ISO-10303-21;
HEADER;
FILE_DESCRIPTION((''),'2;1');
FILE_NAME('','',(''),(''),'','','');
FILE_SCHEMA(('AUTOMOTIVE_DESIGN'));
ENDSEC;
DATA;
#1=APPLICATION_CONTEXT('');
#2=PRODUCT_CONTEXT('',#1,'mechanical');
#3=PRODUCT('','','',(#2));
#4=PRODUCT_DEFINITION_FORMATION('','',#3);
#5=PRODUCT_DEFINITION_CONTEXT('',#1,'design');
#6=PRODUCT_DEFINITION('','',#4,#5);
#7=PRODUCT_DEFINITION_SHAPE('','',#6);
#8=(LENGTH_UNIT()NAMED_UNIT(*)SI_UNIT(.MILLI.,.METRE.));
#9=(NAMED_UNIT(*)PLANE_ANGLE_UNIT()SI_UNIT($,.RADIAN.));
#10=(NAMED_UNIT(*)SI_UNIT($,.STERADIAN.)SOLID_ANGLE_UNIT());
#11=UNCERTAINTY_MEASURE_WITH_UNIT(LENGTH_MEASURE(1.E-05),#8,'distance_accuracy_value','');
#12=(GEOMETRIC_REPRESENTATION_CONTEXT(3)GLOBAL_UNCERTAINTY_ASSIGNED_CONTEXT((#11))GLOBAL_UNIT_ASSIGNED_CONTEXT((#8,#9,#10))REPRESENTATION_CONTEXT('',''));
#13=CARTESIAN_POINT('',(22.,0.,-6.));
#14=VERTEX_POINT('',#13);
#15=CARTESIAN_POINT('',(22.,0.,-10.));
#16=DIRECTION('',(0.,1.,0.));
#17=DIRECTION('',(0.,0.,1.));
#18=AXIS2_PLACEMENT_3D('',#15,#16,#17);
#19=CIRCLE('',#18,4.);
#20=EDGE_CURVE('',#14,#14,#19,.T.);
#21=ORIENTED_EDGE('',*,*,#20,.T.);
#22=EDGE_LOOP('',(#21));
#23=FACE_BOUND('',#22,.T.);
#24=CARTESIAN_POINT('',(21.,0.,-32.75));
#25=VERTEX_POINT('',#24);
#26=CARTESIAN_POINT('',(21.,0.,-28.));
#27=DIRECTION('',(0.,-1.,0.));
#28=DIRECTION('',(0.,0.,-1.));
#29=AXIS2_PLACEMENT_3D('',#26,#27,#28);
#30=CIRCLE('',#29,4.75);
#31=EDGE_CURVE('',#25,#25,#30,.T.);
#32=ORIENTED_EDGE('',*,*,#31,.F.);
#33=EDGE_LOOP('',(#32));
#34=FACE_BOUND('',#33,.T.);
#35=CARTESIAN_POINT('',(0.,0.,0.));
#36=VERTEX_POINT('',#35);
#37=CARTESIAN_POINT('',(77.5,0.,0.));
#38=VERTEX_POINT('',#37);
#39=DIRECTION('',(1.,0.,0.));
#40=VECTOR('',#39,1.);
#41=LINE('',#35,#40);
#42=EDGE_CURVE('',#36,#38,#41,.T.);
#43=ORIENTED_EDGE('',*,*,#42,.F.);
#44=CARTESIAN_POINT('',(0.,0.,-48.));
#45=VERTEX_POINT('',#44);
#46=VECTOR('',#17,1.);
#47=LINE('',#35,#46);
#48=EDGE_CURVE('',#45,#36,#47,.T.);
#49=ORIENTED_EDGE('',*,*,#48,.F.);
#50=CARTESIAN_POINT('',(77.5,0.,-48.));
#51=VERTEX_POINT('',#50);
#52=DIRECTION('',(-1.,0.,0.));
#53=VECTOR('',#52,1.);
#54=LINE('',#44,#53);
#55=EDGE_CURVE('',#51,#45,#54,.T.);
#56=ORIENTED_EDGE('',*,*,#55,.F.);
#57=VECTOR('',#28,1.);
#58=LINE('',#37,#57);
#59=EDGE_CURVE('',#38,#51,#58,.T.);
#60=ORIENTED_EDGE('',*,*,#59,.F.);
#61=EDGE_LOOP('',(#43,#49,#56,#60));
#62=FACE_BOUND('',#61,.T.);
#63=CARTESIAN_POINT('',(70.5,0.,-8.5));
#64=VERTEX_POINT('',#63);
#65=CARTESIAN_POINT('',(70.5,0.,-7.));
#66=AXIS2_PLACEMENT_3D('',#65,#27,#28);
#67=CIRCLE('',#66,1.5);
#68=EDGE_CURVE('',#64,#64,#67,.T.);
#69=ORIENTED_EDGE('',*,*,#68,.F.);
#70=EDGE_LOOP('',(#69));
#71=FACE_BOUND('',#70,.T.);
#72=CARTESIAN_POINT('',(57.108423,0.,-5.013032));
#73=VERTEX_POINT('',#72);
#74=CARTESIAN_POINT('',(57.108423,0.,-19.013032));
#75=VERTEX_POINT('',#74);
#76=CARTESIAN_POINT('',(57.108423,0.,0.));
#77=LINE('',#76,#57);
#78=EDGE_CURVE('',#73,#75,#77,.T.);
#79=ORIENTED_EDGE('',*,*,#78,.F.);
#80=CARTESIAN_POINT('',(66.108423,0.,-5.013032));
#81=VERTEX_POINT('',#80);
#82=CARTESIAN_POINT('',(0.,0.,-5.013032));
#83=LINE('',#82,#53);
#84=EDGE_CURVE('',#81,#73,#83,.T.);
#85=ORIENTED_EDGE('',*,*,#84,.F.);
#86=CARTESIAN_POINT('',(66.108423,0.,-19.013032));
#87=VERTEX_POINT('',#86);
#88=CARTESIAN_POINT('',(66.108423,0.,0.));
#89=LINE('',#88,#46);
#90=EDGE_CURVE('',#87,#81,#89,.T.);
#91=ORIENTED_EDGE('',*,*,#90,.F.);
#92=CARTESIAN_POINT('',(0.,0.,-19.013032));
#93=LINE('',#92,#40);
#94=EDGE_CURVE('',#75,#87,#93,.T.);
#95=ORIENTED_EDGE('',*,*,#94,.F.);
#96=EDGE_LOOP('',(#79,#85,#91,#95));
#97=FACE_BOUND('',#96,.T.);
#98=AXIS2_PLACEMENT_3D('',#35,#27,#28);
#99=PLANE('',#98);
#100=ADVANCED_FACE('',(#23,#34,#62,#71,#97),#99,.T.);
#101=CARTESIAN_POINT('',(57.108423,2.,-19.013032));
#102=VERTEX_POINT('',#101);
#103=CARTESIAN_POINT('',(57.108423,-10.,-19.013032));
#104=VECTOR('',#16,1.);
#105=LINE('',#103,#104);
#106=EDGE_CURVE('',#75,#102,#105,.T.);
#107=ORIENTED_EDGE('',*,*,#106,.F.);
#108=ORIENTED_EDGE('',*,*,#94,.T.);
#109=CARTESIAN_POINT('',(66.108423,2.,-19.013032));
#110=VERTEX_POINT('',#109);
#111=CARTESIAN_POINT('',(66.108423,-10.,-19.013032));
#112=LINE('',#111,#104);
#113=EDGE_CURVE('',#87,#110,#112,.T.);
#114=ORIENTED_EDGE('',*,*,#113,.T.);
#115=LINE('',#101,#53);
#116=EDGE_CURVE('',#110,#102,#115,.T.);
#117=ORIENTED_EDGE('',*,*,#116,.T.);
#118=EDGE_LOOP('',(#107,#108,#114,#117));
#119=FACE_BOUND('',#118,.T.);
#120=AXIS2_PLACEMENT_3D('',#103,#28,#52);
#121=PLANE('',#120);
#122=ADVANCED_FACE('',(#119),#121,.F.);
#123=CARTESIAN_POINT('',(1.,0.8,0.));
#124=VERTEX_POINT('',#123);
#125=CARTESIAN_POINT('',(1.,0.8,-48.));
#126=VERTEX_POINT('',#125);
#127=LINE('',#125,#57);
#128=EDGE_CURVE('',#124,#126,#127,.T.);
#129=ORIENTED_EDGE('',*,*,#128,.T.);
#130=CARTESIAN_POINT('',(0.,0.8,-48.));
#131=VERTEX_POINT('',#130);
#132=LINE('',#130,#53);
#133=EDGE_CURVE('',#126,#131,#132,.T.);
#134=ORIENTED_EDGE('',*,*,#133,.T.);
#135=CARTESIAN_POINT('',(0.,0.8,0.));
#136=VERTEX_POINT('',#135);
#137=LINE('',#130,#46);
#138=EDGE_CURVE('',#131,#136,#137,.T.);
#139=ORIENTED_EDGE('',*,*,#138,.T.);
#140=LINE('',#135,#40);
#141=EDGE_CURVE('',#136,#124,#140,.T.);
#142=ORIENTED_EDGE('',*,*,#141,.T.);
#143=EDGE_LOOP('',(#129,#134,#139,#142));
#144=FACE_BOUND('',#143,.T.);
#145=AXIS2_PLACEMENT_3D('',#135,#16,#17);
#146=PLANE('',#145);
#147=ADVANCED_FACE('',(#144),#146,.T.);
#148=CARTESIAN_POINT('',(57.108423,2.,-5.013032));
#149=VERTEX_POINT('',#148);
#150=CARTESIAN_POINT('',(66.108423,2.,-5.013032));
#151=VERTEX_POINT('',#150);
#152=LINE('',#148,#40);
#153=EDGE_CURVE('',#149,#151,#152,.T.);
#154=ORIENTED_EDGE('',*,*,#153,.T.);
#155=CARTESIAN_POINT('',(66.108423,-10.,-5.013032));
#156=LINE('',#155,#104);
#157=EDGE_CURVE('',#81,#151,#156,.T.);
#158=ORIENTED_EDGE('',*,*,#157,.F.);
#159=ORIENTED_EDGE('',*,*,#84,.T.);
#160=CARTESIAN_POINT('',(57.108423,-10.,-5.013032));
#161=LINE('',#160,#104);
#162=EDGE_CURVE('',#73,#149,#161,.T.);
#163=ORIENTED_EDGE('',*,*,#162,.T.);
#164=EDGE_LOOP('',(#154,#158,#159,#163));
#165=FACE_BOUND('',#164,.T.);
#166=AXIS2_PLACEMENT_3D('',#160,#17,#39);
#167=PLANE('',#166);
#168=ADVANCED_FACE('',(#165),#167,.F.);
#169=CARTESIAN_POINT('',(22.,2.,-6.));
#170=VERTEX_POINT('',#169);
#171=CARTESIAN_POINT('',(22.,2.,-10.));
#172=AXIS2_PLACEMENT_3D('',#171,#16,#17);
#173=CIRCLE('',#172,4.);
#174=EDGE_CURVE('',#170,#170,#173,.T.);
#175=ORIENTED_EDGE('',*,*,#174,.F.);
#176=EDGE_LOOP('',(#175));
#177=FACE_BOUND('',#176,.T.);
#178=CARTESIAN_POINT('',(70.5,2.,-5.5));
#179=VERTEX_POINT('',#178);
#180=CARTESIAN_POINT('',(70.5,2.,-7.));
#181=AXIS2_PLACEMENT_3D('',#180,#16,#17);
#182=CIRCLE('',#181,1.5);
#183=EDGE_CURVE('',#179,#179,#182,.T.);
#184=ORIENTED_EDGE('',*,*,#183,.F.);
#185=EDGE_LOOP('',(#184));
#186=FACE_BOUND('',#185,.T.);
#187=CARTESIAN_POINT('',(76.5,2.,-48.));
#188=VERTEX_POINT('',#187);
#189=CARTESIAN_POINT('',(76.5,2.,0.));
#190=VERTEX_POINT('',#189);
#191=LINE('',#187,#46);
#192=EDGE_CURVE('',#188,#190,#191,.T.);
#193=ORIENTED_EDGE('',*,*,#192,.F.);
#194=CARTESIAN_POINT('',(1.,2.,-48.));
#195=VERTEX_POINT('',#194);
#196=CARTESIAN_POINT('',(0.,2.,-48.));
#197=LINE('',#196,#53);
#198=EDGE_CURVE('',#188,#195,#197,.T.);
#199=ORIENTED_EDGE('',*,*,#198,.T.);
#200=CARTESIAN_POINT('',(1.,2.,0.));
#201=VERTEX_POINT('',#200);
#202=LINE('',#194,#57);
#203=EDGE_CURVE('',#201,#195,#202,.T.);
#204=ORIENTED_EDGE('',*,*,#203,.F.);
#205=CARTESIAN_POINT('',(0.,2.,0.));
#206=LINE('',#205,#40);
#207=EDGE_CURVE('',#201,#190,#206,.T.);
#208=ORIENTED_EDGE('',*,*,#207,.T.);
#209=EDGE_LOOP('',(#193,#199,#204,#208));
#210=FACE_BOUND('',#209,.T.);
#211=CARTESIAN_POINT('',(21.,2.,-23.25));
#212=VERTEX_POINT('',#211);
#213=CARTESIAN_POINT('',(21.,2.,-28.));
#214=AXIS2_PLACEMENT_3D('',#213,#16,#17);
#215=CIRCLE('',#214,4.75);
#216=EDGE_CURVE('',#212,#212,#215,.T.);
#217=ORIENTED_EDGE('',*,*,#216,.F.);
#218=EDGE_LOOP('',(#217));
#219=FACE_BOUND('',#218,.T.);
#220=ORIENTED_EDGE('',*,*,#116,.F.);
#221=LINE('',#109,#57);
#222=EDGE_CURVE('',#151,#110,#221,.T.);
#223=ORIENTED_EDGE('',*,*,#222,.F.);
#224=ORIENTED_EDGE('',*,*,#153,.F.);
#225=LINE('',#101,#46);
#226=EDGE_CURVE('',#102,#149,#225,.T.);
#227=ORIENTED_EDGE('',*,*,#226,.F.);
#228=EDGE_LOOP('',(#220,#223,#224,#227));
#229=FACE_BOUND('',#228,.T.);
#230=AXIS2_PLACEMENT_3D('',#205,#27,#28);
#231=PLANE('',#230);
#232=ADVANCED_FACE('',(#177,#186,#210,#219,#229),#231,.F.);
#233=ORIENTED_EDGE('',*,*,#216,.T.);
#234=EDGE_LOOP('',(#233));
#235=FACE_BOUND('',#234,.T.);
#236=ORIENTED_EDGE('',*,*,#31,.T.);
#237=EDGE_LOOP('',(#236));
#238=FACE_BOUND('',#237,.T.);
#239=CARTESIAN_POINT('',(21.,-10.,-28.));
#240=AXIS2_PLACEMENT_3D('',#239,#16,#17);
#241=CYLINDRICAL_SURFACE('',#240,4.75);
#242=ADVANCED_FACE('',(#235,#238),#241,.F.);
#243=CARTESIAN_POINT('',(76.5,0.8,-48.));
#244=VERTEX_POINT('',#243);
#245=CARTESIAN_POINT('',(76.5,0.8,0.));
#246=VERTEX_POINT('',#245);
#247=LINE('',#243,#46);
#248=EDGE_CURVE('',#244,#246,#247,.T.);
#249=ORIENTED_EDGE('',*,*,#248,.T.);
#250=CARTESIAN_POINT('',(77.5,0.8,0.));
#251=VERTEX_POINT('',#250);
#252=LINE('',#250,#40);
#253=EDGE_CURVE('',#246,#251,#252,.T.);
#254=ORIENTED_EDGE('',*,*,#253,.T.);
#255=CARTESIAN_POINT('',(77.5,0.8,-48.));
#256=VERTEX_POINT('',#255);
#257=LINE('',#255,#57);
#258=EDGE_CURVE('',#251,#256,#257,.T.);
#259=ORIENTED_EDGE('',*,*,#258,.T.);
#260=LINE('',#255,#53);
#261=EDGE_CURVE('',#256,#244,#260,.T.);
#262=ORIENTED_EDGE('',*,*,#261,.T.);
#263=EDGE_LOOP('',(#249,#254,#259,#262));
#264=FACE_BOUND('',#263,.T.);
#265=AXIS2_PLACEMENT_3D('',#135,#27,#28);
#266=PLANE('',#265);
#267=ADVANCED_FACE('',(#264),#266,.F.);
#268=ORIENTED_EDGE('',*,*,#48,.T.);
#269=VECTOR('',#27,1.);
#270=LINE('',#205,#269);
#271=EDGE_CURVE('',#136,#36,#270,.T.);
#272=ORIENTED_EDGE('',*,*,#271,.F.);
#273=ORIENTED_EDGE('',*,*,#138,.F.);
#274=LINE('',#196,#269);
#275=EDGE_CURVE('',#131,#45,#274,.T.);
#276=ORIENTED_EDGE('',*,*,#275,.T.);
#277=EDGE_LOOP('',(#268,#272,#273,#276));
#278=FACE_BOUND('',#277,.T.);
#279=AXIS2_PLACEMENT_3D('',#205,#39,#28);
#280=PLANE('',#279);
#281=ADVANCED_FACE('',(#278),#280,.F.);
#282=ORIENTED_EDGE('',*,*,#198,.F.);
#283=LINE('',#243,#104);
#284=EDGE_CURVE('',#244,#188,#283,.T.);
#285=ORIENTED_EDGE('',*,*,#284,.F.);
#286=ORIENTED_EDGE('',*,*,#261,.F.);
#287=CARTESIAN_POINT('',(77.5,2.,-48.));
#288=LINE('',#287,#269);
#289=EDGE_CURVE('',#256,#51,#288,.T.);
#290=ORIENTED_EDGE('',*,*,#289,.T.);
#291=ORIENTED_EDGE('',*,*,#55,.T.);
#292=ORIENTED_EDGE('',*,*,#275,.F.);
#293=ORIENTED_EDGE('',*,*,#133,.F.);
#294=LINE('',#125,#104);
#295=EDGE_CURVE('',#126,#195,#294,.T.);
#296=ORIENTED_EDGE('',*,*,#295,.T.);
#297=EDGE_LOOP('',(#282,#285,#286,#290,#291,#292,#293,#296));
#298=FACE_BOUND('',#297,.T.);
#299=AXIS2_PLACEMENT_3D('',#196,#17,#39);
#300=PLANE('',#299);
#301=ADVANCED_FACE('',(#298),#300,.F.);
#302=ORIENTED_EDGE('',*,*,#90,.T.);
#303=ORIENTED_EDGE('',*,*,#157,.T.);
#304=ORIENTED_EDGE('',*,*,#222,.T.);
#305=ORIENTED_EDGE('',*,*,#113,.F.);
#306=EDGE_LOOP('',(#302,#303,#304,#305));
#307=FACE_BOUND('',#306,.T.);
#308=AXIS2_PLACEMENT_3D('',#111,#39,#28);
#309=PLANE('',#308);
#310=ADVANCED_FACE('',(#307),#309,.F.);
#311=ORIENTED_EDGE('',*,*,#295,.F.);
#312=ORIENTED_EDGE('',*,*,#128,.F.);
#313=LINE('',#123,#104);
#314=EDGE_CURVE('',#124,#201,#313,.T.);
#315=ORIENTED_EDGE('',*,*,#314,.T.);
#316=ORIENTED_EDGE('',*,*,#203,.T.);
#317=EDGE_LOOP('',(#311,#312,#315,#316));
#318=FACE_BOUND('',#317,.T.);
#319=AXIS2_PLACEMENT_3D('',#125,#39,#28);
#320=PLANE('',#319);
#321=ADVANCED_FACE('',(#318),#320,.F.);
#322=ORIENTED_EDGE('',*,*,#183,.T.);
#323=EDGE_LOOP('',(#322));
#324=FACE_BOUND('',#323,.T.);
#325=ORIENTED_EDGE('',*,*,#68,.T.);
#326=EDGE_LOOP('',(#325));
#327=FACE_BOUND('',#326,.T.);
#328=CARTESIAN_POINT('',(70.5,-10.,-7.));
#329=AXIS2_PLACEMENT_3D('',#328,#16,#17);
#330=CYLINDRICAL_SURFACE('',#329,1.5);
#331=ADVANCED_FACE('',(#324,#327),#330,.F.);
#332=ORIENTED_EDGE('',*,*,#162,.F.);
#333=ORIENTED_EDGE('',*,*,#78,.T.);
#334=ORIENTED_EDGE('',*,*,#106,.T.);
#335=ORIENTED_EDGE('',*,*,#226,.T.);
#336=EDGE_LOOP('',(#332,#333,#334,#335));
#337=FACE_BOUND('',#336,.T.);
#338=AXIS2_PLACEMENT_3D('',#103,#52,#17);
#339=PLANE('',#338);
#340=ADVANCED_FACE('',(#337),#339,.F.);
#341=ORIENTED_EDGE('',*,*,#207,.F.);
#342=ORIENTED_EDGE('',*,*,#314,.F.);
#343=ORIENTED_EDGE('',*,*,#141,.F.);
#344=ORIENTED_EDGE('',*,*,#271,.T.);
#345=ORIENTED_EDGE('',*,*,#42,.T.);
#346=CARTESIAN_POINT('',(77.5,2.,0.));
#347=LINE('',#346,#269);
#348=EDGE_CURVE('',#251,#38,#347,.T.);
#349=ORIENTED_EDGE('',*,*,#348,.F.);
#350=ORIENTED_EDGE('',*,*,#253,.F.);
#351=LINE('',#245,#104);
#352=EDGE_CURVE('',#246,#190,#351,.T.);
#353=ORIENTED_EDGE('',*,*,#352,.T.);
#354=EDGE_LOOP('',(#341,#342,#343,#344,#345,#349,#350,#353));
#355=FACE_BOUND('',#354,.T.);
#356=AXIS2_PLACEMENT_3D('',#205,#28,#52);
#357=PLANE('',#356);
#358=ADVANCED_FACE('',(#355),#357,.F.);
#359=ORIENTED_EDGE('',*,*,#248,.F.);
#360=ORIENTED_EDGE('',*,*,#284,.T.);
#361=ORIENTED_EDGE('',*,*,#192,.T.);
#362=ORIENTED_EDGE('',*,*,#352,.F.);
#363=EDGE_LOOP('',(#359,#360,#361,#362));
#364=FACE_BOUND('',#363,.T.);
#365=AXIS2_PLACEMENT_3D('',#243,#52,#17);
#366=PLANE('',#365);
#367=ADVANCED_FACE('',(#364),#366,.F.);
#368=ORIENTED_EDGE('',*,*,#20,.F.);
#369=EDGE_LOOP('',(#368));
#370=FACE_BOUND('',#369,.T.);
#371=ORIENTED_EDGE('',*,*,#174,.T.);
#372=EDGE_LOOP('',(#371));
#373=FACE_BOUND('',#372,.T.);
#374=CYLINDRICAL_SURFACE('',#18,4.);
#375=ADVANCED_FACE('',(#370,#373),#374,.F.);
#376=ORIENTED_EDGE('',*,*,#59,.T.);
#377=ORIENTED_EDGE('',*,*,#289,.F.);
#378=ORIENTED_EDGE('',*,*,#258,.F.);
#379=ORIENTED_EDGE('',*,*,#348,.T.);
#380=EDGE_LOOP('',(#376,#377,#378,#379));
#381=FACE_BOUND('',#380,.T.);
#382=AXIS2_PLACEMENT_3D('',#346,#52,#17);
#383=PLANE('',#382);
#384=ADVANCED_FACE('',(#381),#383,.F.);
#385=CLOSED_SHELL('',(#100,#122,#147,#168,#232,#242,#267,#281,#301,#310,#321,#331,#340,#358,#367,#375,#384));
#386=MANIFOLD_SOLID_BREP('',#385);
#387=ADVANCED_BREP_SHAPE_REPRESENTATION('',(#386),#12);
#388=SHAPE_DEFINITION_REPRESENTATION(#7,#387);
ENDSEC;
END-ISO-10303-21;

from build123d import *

# Parameters (mm, degrees)
SKETCH1_W              = 77.5
SKETCH1_H              = 48
BOSS_EXTRUDE1_DEPTH    = 2
SKETCH2_W              = 1
SKETCH2_H              = 48
CUT_EXTRUDE1_DEPTH     = 1.2
SKETCH3_R              = 4
CUT_EXTRUDE2_DEPTH     = 2
SKETCH4_R              = 1.5
SKETCH4_W              = 9
SKETCH4_H              = 14
CUT_EXTRUDE3_DEPTH     = 12
CUT_EXTRUDE4_OUTLINE_R = 4.75
CUT_EXTRUDE4_DEPTH     = 2


# Read off the part's stored shape, not the designer's step: Cut-Extrude4
with BuildPart() as part:
    # Sketch1 → Boss-Extrude1 (new body)
    with BuildSketch(Plane(origin=(0, 0, 0), x_dir=(1, 0, 0), z_dir=(0, 1, 0))):
        with Locations((38.75, 24)):
            Rectangle(SKETCH1_W, SKETCH1_H)
    extrude(amount=BOSS_EXTRUDE1_DEPTH)

    # Sketch2 → Cut-Extrude1 (cut)
    with BuildSketch(Plane(origin=(0, 2, 0), x_dir=(1, 0, 0), z_dir=(0, 1, 0))):
        with Locations((0.5, 24)):
            Rectangle(SKETCH2_W, SKETCH2_H)
        with Locations((77, 24)):
            Rectangle(SKETCH2_W, SKETCH2_H)
    extrude(amount=-CUT_EXTRUDE1_DEPTH, mode=Mode.SUBTRACT)

    # Sketch3 → Cut-Extrude2 (cut)
    with BuildSketch(Plane(origin=(0, 2, 0), x_dir=(1, 0, 0), z_dir=(0, 1, 0))):
        with Locations(Location((22, 10, 0), (0, 0, 270))):
            Circle(SKETCH3_R)
    extrude(amount=-CUT_EXTRUDE2_DEPTH, mode=Mode.SUBTRACT)

    # Sketch4 → Cut-Extrude3 (cut)
    with BuildSketch(Plane(origin=(0, 2, 0), x_dir=(1, 0, 0), z_dir=(0, 1, 0))):
        with Locations(Location((70.5, 7, 0), (0, 0, 270))):
            Circle(SKETCH4_R)
        with Locations((61.608422626, 12.013032017)):
            Rectangle(SKETCH4_W, SKETCH4_H)
    extrude(amount=-CUT_EXTRUDE3_DEPTH, mode=Mode.SUBTRACT)

    # Cut-Extrude4 outline → Cut-Extrude4 (cut)
    with BuildSketch(Plane(origin=(0, 0, 0), x_dir=(1, 0, 0), z_dir=(0, 1, 0))):
        with Locations((21, 28)):
            Circle(CUT_EXTRUDE4_OUTLINE_R)
    extrude(amount=CUT_EXTRUDE4_DEPTH, mode=Mode.SUBTRACT)


solid = part.part
